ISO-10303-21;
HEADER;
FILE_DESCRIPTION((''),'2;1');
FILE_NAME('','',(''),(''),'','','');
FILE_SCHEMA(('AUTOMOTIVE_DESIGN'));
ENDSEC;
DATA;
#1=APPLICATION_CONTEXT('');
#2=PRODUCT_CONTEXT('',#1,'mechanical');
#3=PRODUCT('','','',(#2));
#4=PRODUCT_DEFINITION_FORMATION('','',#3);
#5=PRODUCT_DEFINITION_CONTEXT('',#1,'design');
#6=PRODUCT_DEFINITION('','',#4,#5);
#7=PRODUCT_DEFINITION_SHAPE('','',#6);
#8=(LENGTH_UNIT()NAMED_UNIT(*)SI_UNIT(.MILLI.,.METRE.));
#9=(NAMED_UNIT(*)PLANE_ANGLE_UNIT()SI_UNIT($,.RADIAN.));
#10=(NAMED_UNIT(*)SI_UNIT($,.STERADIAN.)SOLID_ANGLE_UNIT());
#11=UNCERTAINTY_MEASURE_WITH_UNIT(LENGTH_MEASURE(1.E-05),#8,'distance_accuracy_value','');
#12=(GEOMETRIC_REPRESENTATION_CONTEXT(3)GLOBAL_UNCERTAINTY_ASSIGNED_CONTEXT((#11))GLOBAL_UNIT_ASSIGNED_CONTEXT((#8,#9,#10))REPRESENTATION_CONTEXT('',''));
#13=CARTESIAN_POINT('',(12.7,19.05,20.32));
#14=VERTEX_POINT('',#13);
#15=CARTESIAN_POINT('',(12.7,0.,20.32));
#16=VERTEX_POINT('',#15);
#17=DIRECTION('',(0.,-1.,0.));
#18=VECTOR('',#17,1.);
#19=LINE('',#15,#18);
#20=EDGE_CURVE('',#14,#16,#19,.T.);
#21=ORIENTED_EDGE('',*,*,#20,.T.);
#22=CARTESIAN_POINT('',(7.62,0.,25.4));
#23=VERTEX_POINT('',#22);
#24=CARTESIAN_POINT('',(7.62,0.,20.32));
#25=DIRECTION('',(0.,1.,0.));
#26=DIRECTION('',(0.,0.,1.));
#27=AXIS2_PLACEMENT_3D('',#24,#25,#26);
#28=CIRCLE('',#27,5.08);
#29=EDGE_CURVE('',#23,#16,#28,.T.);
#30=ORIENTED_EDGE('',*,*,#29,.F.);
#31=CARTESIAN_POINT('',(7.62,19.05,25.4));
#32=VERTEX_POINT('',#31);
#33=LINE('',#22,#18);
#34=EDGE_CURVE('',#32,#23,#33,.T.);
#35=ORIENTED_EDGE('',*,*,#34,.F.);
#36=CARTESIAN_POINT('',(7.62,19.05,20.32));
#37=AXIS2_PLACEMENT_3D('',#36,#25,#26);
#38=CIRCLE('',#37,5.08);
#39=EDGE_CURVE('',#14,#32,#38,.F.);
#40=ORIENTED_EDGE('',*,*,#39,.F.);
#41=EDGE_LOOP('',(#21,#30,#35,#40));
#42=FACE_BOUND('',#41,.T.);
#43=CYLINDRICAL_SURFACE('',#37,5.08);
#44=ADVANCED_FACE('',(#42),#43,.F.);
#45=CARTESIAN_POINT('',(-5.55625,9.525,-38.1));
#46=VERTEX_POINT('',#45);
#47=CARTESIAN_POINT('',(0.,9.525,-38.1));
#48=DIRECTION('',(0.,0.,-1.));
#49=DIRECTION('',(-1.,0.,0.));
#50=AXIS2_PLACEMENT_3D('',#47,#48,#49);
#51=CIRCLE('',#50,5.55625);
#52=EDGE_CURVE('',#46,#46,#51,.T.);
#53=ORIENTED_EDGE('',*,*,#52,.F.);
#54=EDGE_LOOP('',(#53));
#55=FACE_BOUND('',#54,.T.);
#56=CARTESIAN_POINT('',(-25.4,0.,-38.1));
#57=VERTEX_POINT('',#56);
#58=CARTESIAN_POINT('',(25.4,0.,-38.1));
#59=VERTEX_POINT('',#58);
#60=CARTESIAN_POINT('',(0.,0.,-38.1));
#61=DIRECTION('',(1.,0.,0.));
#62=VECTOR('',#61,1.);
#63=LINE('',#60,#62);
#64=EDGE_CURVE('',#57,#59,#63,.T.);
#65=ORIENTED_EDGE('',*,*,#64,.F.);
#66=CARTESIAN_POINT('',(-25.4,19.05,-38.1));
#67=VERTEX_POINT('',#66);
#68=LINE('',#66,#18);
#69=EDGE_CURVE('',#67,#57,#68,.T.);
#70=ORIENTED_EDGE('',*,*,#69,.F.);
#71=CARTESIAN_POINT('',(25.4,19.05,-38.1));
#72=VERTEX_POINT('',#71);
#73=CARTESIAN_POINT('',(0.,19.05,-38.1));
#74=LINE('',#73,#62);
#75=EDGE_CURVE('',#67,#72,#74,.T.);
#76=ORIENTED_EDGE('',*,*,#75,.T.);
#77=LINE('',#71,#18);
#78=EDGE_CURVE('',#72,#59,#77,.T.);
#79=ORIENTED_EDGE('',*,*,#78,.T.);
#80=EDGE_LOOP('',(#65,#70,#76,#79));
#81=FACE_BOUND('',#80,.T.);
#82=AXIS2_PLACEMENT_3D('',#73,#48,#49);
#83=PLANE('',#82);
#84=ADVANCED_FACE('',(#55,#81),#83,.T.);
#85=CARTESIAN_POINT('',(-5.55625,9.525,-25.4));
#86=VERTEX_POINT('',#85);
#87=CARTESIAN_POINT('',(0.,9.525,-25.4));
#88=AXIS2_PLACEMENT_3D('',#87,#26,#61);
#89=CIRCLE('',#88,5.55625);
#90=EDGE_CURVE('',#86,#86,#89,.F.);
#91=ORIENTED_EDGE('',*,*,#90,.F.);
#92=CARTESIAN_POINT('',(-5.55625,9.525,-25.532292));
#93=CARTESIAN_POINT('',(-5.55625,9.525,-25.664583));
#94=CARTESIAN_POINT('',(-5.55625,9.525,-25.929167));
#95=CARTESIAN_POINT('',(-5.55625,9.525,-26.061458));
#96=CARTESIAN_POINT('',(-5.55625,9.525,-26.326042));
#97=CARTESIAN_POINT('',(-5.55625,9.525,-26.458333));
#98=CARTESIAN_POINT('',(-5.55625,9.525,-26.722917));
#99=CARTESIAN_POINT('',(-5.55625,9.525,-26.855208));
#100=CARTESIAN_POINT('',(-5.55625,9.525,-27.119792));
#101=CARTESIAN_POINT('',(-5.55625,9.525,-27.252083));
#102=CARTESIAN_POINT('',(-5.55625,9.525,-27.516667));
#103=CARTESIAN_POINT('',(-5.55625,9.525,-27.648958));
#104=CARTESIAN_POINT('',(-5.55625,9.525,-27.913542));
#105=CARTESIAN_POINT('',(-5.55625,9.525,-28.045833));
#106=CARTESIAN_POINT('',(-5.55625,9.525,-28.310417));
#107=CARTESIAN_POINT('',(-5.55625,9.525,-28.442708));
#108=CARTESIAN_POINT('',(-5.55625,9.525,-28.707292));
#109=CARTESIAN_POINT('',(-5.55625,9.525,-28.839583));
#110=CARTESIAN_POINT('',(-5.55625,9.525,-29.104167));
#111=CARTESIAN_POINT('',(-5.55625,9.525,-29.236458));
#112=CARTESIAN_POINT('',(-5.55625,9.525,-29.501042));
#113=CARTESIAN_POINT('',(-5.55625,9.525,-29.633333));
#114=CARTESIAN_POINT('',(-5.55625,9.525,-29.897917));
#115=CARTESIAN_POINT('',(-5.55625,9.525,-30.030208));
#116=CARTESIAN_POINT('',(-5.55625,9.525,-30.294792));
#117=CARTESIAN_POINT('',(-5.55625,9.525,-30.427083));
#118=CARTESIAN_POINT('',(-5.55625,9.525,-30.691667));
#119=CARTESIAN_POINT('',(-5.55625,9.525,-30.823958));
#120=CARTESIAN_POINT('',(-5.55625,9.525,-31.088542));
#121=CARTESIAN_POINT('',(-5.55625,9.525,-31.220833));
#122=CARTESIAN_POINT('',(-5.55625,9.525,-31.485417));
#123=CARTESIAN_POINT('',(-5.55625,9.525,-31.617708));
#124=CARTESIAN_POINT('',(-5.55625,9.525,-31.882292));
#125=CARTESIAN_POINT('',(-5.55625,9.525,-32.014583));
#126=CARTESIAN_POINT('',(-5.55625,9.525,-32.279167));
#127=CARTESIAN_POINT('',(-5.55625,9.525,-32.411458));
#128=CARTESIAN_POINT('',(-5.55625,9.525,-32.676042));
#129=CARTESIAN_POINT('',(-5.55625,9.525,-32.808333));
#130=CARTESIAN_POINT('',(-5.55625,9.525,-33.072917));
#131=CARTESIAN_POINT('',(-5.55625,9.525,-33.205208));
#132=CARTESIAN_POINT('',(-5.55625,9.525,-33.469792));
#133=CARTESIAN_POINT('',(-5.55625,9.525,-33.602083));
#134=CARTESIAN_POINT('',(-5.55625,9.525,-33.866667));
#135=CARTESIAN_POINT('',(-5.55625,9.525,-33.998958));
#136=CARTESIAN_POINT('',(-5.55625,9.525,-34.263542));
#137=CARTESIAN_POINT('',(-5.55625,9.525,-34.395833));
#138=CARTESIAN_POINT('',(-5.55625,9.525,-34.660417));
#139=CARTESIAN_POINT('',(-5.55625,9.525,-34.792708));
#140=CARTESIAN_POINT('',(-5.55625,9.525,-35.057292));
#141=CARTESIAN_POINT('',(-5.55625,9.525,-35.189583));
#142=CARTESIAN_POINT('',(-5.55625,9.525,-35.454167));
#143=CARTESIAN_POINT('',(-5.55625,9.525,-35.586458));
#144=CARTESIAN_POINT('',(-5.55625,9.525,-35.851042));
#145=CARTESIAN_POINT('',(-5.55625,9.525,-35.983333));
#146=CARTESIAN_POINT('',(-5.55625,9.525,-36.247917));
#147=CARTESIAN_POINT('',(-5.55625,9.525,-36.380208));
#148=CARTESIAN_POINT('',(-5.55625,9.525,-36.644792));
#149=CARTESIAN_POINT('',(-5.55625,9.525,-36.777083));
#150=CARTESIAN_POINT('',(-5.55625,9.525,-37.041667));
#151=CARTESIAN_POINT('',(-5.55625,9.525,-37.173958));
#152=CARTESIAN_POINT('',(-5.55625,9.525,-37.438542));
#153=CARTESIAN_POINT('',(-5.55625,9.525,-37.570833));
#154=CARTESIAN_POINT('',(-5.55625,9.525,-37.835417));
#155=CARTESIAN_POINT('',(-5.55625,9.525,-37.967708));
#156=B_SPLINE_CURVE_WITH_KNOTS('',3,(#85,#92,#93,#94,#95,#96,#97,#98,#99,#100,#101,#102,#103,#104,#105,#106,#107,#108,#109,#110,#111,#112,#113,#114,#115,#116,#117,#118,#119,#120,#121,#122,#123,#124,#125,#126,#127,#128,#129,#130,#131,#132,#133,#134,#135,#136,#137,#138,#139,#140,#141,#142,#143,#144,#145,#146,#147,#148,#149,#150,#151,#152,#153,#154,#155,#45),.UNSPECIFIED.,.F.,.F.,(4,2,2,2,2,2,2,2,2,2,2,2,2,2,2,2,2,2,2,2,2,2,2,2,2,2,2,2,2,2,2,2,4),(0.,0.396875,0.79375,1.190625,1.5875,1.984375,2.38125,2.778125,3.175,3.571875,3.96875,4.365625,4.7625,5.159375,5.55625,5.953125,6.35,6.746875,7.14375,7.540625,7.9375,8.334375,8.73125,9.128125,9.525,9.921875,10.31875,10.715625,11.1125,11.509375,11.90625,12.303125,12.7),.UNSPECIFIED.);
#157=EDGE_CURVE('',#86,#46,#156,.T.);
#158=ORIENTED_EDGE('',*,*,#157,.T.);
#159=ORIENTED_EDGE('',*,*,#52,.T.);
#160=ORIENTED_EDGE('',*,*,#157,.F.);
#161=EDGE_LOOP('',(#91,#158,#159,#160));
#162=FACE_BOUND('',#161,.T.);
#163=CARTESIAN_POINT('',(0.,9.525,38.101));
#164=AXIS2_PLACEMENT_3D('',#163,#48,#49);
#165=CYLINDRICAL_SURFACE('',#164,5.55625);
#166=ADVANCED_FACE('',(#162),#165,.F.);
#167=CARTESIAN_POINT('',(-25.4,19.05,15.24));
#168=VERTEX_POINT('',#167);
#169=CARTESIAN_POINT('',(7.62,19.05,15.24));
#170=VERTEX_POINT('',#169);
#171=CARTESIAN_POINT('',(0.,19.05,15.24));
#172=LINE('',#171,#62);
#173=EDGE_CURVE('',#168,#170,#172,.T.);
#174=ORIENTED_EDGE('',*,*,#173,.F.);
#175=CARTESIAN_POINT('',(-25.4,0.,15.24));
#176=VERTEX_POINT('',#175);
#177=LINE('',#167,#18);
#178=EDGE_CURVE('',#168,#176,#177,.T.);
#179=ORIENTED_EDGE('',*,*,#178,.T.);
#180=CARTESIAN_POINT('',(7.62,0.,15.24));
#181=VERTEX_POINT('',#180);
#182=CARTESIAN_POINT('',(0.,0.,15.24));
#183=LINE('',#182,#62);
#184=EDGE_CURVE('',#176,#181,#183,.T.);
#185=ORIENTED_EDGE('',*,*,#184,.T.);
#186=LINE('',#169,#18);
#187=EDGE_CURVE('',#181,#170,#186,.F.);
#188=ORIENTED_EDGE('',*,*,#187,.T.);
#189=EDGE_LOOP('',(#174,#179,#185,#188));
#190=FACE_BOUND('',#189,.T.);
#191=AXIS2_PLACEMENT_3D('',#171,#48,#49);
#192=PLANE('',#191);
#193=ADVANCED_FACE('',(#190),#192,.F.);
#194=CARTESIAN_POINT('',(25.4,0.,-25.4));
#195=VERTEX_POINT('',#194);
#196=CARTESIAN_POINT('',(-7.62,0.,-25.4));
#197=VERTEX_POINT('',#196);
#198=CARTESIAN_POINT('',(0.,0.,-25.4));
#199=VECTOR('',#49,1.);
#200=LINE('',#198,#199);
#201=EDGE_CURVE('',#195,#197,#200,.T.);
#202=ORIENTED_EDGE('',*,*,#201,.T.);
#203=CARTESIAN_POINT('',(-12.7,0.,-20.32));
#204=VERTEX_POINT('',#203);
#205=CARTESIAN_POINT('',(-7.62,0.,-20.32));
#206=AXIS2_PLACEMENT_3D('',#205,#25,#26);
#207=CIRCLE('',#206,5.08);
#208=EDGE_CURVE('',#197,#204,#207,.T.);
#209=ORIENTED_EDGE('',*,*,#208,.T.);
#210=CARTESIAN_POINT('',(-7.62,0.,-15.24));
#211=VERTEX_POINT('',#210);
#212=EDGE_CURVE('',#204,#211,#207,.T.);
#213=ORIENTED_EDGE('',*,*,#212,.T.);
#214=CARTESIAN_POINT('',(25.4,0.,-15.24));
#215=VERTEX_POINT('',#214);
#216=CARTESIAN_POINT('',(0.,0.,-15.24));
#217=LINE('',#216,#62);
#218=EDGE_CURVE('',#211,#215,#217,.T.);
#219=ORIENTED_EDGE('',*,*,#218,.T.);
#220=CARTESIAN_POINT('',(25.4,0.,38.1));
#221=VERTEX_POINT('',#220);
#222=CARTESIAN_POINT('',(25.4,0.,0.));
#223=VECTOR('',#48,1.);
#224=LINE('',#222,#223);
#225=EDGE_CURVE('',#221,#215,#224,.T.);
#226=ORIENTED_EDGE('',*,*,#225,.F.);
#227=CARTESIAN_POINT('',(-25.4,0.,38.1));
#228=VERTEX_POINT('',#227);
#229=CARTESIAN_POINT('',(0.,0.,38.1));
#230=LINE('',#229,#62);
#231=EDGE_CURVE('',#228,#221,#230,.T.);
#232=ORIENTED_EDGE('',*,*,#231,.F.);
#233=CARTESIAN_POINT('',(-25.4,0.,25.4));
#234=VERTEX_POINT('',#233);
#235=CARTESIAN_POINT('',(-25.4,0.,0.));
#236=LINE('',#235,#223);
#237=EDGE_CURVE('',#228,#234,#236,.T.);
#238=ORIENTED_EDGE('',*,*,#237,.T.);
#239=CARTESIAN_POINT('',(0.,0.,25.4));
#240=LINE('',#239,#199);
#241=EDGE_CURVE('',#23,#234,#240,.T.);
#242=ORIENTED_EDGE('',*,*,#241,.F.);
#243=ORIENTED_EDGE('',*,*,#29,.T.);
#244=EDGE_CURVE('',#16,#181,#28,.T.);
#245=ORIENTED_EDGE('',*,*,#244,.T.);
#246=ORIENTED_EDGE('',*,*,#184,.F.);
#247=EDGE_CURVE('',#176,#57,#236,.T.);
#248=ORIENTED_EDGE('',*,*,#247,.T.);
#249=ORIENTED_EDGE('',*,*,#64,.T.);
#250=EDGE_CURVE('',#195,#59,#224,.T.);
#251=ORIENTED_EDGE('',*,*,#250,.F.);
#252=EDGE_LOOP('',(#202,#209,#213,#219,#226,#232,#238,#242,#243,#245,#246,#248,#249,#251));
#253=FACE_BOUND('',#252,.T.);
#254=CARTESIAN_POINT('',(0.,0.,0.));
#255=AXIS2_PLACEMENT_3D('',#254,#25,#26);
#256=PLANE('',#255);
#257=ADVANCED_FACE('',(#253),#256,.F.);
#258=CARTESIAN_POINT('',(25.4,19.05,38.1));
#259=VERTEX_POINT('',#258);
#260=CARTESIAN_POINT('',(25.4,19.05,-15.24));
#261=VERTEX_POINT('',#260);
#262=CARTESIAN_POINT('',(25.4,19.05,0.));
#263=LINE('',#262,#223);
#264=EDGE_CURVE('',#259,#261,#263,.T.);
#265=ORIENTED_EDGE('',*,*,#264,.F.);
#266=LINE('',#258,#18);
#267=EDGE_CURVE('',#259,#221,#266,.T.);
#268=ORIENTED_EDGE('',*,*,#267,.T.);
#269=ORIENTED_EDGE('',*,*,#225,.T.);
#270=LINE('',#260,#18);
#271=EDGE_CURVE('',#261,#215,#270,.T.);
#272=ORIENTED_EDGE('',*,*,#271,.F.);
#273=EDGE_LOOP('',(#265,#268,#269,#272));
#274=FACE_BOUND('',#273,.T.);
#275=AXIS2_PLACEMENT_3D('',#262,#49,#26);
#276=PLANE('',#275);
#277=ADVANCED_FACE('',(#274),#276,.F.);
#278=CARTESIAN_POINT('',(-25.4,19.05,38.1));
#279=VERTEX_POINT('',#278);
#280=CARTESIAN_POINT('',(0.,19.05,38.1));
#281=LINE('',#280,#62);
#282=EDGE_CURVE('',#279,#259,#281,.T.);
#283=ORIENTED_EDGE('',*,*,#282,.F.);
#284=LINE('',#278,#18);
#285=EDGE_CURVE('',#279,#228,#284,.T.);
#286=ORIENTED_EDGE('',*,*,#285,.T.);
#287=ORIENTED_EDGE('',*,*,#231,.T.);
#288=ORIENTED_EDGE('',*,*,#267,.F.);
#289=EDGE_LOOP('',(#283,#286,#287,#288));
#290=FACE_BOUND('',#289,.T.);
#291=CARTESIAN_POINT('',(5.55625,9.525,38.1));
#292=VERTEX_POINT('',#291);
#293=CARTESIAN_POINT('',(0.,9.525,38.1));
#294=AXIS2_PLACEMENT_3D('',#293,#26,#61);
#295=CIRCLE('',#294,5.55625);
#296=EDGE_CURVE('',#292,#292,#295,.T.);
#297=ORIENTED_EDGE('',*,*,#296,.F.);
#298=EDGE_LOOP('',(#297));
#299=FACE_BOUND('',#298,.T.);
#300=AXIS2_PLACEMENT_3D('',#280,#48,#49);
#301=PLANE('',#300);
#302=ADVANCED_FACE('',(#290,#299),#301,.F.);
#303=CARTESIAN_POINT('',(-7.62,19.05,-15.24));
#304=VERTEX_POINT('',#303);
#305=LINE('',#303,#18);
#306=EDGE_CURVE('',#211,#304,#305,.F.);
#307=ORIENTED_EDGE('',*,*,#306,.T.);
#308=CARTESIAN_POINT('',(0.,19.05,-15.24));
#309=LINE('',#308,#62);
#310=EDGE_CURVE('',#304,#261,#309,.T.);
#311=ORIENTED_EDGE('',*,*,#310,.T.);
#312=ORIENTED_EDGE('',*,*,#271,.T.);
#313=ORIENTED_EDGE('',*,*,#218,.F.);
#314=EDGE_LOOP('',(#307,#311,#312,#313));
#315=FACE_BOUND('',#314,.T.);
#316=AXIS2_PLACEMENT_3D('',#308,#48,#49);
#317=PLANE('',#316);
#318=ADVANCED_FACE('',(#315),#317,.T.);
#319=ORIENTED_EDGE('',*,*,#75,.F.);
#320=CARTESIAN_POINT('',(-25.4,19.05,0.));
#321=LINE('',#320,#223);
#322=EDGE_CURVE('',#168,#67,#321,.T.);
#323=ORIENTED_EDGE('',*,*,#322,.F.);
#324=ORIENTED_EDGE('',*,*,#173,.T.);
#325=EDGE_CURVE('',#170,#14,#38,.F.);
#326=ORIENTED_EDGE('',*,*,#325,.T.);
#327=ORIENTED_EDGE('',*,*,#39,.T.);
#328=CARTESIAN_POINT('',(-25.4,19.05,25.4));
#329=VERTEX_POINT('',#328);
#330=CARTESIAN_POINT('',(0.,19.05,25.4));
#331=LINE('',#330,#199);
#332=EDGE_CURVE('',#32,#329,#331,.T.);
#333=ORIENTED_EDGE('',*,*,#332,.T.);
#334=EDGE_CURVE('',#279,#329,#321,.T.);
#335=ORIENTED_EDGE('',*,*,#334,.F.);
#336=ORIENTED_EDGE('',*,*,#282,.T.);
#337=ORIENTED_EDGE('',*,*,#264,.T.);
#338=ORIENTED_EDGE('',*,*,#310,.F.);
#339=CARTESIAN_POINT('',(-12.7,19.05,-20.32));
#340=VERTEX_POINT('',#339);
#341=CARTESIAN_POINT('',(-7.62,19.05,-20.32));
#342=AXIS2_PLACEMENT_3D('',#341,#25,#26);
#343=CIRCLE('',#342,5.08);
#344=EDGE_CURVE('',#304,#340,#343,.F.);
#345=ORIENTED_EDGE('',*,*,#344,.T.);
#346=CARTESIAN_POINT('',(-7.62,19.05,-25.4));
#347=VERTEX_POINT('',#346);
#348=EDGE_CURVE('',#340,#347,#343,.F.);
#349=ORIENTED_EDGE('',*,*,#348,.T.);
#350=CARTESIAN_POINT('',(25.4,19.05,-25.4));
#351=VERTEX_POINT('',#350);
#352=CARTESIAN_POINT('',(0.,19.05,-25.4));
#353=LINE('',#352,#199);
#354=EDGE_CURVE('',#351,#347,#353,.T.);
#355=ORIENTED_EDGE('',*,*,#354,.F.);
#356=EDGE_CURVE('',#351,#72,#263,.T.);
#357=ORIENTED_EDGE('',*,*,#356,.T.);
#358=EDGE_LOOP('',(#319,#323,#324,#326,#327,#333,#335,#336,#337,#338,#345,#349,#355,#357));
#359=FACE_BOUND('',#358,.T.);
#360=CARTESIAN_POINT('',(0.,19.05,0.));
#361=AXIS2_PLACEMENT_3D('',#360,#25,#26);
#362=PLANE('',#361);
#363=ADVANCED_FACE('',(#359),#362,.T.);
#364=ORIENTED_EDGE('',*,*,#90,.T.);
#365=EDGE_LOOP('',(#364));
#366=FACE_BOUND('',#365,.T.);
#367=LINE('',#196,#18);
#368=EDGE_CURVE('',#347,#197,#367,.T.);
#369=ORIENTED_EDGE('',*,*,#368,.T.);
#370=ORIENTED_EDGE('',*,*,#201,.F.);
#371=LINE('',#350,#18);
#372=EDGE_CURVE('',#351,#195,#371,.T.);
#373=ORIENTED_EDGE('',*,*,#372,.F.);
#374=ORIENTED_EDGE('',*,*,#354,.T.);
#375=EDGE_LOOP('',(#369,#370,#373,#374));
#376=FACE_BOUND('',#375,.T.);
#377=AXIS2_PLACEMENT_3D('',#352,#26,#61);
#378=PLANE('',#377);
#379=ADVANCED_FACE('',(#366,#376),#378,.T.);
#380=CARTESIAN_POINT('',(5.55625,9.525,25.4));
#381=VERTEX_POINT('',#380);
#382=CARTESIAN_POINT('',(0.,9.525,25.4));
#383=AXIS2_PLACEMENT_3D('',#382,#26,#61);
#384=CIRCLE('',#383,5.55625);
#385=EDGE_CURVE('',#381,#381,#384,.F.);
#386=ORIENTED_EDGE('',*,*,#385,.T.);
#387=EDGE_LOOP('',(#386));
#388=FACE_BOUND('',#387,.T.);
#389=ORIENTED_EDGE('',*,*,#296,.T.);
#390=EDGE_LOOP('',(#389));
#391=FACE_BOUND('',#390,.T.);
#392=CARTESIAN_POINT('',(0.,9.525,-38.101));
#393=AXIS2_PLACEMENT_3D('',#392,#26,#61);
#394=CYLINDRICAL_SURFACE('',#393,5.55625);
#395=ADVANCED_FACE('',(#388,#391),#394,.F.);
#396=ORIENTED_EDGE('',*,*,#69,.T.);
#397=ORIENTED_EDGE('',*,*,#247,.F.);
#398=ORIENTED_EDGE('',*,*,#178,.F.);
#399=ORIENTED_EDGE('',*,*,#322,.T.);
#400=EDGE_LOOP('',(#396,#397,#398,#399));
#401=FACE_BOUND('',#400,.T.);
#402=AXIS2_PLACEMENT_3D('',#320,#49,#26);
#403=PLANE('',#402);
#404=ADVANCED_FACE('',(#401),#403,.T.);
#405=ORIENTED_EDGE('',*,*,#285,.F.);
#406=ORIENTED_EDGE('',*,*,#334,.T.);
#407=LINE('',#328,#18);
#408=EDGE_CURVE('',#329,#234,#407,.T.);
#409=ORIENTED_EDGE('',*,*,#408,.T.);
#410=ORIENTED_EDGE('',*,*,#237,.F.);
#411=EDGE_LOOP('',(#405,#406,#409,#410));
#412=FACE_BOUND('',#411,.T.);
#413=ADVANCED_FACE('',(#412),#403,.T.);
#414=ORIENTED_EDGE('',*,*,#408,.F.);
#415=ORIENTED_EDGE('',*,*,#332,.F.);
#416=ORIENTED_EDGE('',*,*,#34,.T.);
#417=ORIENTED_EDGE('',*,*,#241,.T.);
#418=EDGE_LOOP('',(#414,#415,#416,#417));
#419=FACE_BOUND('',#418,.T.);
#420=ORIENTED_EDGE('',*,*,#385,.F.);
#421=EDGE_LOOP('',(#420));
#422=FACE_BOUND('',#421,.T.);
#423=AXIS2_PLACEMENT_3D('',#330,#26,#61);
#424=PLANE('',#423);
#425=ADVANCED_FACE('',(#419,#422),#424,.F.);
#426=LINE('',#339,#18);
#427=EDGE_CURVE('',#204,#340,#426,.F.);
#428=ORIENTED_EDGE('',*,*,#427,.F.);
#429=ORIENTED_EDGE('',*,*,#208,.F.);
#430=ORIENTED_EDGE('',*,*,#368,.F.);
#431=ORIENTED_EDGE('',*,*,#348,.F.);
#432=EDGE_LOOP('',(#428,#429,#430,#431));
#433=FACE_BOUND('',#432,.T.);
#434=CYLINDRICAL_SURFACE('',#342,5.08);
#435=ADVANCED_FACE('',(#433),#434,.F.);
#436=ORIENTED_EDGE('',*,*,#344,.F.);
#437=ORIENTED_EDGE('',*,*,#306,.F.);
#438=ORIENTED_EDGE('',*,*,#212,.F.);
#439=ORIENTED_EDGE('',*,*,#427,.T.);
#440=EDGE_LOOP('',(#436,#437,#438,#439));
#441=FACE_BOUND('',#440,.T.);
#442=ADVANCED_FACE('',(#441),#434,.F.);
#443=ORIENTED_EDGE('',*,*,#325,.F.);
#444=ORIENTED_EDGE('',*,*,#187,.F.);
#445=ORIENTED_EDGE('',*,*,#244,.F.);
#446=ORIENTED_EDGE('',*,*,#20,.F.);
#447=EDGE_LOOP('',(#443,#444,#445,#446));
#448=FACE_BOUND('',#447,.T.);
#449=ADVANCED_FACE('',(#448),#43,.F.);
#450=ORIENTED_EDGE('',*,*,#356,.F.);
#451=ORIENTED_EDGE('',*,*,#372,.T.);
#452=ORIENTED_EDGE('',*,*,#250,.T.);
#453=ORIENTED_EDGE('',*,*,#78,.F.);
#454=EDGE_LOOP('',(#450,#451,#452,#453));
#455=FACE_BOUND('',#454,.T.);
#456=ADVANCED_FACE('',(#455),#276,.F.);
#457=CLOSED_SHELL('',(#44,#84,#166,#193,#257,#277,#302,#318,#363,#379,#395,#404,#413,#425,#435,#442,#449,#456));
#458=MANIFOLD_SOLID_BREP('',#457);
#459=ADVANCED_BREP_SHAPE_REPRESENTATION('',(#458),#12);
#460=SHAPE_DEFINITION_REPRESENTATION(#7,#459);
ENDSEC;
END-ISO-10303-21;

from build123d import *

# Parameters (mm, degrees)
BOSS_EXTRUDE1_DEPTH = 19.05
FILLET1_R           = 5.08
CUT_EXTRUDE1_REACH  = 84.55
SKETCH2_R           = 5.55625
CUT_EXTRUDE2_START  = -76.2
SKETCH2_2_R         = 5.55625
CUT_EXTRUDE2_DEPTH  = 12.7


with BuildPart() as part:
    # Sketch1 → Boss-Extrude1 (new body)
    with BuildSketch(Plane(origin=(0, 0, 0), x_dir=(1, 0, 0), z_dir=(0, 1, 0))):
        Polygon((-12.7, 25.4), (25.4, 25.4), (25.4, 38.1), (-25.4, 38.1), (-25.4, -15.24), (12.7, -15.24), (12.7, -25.4), (-25.4, -25.4), (-25.4, -38.1), (25.4, -38.1), (25.4, 15.24), (-12.7, 15.24), align=None)
    extrude(amount=BOSS_EXTRUDE1_DEPTH)

    # Fillet1
    fillet1_edges = [part.edges().sort_by_distance(p)[0] for p in [
        (12.7, 9.525, 25.4),
        (12.7, 9.525, 15.24),
        (-12.7, 9.525, -15.24),
        (-12.7, 9.525, -25.4),
    ]]
    fillet(fillet1_edges, radius=FILLET1_R - 0.0001)  # a hair under: the kernel refuses the full size

    # Sketch2 → Cut-Extrude1 (cut, up to next)
    with BuildSketch(Plane.XY.offset(38.1), mode=Mode.PRIVATE) as cut_extrude1_sk1:
        with Locations((0, 9.525)):
            Circle(SKETCH2_R)
    cut_extrude1_tool1 = extrude(cut_extrude1_sk1.sketch, amount=-CUT_EXTRUDE1_REACH, mode=Mode.PRIVATE) & part.part
    add(cut_extrude1_tool1.solids().sort_by_distance((0, 9.525, 38.1))[0], mode=Mode.SUBTRACT)

    # Sketch2<2> → Cut-Extrude2 (cut)
    with BuildSketch(Plane.XY.offset(38.1).offset(CUT_EXTRUDE2_START)):
        with Locations((0, 9.525)):
            Circle(SKETCH2_2_R)
    extrude(amount=CUT_EXTRUDE2_DEPTH, mode=Mode.SUBTRACT)


solid = part.part
